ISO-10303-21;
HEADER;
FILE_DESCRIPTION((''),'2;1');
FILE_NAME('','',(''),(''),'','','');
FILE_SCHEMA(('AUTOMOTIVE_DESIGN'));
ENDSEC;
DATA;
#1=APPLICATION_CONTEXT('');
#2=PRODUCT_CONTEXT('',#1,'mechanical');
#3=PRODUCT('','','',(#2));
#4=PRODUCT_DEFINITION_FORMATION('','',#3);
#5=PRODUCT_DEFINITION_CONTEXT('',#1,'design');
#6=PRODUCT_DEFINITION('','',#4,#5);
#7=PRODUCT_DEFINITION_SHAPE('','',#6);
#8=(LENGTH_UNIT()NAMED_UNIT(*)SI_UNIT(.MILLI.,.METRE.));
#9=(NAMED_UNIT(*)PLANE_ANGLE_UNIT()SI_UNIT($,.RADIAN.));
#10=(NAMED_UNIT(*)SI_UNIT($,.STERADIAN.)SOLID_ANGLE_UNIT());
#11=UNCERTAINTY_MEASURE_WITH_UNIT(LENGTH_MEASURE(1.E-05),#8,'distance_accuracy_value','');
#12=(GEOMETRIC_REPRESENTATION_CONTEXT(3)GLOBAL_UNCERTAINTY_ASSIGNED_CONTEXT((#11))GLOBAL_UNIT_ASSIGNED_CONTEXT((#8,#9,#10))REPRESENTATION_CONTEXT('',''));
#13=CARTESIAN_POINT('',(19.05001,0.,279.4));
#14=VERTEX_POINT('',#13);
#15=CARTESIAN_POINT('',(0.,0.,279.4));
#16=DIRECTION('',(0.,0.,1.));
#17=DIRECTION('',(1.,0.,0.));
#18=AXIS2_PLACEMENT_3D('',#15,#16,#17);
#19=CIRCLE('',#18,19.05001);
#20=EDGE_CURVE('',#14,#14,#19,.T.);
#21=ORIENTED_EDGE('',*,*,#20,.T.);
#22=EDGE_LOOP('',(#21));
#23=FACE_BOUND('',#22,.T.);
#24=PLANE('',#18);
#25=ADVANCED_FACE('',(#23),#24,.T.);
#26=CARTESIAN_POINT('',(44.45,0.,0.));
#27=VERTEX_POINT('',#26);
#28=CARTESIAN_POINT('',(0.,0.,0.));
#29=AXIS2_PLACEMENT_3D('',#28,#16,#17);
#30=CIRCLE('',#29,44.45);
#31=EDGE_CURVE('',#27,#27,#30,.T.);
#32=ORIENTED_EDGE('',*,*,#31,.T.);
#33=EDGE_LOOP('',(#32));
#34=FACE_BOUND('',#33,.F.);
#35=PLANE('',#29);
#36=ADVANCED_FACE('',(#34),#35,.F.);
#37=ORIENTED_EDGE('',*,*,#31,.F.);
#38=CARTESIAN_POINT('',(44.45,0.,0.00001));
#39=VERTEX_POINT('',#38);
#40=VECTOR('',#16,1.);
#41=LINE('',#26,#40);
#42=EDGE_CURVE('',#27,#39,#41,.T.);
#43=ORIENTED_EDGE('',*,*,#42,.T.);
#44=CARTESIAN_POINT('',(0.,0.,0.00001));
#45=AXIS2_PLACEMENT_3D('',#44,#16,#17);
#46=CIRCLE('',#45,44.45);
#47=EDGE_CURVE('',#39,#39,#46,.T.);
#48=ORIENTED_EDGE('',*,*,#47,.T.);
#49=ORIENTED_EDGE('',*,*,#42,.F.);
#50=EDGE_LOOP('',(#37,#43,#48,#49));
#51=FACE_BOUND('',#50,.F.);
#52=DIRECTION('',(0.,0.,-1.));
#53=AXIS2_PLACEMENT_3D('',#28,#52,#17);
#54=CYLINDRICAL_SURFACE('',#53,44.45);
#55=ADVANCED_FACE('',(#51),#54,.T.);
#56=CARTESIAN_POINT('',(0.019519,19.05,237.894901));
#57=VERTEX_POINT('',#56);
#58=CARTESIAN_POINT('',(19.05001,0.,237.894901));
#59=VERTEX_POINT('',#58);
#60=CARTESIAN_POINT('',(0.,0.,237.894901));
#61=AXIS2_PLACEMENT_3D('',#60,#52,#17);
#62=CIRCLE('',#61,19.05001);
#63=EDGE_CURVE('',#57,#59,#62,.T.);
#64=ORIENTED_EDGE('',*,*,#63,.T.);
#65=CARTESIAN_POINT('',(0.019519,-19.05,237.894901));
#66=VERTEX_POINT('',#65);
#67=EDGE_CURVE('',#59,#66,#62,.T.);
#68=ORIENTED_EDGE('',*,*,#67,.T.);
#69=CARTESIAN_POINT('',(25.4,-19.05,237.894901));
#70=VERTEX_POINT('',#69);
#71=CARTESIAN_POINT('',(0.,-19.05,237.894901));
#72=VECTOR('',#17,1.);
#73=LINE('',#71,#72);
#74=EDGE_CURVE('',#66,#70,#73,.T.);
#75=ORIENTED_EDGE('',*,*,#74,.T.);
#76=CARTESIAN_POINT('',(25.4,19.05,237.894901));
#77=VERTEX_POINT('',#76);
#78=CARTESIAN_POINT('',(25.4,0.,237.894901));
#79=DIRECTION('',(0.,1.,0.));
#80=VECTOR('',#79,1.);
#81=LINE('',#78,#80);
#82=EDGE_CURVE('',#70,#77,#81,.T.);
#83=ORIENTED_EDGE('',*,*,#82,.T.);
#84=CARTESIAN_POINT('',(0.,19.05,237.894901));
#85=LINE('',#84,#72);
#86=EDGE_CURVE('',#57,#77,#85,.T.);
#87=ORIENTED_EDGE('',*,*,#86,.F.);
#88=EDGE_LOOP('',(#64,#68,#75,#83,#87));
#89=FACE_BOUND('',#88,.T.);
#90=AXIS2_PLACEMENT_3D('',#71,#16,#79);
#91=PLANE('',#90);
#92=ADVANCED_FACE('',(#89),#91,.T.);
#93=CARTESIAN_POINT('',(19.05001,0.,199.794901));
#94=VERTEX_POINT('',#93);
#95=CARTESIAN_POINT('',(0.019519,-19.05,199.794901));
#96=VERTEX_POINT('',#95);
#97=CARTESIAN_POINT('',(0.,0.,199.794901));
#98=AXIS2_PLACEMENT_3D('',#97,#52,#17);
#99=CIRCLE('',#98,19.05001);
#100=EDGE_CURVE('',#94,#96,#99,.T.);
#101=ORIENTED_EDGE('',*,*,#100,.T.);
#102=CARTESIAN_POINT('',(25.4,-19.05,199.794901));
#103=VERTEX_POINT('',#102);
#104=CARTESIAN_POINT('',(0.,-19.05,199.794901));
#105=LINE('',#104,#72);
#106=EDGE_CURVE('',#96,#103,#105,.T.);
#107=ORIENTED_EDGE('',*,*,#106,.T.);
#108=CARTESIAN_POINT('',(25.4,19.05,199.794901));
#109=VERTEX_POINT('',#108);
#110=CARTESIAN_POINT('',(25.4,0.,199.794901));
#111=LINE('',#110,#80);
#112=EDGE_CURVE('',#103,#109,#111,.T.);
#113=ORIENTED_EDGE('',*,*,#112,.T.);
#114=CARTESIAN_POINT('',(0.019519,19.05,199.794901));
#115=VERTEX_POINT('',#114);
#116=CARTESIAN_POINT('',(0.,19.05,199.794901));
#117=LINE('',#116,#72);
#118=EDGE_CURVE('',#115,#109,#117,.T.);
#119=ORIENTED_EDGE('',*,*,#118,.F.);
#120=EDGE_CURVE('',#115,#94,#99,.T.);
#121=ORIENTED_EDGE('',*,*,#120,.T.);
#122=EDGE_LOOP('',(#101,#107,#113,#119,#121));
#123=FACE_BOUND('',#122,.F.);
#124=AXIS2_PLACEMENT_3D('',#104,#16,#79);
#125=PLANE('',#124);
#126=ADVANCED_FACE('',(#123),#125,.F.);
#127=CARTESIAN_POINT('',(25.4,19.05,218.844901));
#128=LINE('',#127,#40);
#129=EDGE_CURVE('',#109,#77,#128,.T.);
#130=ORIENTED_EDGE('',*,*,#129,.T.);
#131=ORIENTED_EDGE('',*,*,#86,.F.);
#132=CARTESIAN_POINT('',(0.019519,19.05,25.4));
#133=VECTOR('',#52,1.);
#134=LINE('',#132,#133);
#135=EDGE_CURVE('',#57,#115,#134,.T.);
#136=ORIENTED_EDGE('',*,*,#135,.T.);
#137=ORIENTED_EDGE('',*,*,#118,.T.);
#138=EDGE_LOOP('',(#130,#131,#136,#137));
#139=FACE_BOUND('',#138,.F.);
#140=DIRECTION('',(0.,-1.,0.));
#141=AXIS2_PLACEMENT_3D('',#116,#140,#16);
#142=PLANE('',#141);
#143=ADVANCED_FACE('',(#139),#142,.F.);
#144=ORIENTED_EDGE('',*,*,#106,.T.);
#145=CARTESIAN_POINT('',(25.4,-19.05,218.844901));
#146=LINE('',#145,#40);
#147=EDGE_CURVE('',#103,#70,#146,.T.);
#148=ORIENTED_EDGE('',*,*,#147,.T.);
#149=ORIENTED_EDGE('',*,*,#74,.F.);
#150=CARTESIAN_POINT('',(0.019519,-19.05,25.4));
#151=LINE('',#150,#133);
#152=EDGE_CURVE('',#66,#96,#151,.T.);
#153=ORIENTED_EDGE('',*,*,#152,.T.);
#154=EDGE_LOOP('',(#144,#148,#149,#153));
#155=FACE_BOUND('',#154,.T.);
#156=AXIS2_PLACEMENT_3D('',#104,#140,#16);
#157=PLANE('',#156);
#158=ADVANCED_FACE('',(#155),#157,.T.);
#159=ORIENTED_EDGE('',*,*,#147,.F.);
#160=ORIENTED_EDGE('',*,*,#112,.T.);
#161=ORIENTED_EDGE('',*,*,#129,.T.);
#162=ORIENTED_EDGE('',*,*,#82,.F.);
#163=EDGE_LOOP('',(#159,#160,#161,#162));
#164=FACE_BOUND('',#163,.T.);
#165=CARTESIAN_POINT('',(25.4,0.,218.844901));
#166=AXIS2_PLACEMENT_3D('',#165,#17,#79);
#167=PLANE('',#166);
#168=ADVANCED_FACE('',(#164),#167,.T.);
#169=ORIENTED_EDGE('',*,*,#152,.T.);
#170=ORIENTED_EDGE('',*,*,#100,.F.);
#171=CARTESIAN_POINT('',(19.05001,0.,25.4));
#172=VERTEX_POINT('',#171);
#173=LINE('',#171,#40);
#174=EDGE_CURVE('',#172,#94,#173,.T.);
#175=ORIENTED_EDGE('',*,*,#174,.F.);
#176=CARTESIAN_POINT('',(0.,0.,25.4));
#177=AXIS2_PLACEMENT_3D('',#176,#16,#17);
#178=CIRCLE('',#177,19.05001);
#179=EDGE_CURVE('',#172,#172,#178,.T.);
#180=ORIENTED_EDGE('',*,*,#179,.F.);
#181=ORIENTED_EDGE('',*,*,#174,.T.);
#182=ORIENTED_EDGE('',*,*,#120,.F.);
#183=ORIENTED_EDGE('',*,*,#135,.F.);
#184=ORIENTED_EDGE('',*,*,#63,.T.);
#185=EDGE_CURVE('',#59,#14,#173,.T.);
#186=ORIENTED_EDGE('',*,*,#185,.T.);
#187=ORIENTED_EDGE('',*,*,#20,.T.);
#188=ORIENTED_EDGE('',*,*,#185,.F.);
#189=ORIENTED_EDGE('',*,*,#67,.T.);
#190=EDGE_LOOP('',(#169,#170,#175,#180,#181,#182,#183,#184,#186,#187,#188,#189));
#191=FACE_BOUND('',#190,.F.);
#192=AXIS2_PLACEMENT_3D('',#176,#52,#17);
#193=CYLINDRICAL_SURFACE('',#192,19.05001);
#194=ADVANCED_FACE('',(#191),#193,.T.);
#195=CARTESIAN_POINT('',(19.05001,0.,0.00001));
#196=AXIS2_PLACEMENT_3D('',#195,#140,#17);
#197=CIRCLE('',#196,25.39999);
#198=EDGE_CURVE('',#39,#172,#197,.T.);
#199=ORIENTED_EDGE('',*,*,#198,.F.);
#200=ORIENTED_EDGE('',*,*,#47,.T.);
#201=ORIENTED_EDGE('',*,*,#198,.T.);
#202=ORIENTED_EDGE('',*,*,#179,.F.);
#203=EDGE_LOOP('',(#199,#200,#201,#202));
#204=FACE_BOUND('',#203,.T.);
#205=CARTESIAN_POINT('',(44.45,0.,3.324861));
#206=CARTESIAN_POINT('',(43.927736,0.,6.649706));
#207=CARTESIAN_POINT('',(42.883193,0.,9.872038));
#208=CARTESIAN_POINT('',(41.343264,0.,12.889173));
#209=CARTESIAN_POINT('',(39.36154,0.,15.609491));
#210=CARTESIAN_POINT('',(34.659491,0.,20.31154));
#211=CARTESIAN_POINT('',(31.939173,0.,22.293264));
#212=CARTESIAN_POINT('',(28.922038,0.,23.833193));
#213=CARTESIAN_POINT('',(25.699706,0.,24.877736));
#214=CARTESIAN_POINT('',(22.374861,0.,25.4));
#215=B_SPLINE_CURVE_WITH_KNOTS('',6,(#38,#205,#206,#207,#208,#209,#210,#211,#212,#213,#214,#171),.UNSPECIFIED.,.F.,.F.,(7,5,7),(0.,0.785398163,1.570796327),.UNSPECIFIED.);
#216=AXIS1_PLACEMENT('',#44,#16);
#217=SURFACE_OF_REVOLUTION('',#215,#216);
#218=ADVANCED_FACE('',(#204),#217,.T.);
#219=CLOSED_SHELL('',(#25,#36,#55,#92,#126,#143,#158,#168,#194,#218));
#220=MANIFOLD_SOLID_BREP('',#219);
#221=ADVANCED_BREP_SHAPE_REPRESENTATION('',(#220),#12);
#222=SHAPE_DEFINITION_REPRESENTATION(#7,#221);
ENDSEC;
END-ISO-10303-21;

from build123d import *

# Parameters (mm, degrees)
F0_R     = 44.45
F1_DEPTH = 25.4
F2_R     = 25.39999
F3_DEPTH = 254
F4_W     = 38.1
F4_H     = 38.1
F5_DEPTH = 25.4


# Not quite as in the source:
# - a fillet or chamfer is up to 0.001 mm smaller than in the source, because OpenCascade refuses the exact size


with BuildPart() as f1:
    # F0 (on Top) → F1 (new body)
    with BuildSketch(Plane.XY):
        Circle(F0_R)
    extrude(amount=F1_DEPTH)

    # F2 (radius 25.4 in the source; OpenCascade refuses exactly that, so slightly less here)
    f2_edges = [f1.edges().sort_by_distance(p)[0] for p in [
        (-44.45, 0, 25.4),
    ]]
    fillet(f2_edges, radius=F2_R)

    # F3 (add): a face of the model
    f3_faces = [f1.faces().sort_by_distance(p)[0] for p in [
        (0, 0, 25.4),
    ]]
    extrude(f3_faces, amount=F3_DEPTH)

    # F4 (on Right) → F5 (join)
    with BuildSketch(Plane.YZ):
        with Locations((0, 218.8449014022)):
            Rectangle(F4_W, F4_H)
    extrude(amount=F5_DEPTH)


solid = f1.part
